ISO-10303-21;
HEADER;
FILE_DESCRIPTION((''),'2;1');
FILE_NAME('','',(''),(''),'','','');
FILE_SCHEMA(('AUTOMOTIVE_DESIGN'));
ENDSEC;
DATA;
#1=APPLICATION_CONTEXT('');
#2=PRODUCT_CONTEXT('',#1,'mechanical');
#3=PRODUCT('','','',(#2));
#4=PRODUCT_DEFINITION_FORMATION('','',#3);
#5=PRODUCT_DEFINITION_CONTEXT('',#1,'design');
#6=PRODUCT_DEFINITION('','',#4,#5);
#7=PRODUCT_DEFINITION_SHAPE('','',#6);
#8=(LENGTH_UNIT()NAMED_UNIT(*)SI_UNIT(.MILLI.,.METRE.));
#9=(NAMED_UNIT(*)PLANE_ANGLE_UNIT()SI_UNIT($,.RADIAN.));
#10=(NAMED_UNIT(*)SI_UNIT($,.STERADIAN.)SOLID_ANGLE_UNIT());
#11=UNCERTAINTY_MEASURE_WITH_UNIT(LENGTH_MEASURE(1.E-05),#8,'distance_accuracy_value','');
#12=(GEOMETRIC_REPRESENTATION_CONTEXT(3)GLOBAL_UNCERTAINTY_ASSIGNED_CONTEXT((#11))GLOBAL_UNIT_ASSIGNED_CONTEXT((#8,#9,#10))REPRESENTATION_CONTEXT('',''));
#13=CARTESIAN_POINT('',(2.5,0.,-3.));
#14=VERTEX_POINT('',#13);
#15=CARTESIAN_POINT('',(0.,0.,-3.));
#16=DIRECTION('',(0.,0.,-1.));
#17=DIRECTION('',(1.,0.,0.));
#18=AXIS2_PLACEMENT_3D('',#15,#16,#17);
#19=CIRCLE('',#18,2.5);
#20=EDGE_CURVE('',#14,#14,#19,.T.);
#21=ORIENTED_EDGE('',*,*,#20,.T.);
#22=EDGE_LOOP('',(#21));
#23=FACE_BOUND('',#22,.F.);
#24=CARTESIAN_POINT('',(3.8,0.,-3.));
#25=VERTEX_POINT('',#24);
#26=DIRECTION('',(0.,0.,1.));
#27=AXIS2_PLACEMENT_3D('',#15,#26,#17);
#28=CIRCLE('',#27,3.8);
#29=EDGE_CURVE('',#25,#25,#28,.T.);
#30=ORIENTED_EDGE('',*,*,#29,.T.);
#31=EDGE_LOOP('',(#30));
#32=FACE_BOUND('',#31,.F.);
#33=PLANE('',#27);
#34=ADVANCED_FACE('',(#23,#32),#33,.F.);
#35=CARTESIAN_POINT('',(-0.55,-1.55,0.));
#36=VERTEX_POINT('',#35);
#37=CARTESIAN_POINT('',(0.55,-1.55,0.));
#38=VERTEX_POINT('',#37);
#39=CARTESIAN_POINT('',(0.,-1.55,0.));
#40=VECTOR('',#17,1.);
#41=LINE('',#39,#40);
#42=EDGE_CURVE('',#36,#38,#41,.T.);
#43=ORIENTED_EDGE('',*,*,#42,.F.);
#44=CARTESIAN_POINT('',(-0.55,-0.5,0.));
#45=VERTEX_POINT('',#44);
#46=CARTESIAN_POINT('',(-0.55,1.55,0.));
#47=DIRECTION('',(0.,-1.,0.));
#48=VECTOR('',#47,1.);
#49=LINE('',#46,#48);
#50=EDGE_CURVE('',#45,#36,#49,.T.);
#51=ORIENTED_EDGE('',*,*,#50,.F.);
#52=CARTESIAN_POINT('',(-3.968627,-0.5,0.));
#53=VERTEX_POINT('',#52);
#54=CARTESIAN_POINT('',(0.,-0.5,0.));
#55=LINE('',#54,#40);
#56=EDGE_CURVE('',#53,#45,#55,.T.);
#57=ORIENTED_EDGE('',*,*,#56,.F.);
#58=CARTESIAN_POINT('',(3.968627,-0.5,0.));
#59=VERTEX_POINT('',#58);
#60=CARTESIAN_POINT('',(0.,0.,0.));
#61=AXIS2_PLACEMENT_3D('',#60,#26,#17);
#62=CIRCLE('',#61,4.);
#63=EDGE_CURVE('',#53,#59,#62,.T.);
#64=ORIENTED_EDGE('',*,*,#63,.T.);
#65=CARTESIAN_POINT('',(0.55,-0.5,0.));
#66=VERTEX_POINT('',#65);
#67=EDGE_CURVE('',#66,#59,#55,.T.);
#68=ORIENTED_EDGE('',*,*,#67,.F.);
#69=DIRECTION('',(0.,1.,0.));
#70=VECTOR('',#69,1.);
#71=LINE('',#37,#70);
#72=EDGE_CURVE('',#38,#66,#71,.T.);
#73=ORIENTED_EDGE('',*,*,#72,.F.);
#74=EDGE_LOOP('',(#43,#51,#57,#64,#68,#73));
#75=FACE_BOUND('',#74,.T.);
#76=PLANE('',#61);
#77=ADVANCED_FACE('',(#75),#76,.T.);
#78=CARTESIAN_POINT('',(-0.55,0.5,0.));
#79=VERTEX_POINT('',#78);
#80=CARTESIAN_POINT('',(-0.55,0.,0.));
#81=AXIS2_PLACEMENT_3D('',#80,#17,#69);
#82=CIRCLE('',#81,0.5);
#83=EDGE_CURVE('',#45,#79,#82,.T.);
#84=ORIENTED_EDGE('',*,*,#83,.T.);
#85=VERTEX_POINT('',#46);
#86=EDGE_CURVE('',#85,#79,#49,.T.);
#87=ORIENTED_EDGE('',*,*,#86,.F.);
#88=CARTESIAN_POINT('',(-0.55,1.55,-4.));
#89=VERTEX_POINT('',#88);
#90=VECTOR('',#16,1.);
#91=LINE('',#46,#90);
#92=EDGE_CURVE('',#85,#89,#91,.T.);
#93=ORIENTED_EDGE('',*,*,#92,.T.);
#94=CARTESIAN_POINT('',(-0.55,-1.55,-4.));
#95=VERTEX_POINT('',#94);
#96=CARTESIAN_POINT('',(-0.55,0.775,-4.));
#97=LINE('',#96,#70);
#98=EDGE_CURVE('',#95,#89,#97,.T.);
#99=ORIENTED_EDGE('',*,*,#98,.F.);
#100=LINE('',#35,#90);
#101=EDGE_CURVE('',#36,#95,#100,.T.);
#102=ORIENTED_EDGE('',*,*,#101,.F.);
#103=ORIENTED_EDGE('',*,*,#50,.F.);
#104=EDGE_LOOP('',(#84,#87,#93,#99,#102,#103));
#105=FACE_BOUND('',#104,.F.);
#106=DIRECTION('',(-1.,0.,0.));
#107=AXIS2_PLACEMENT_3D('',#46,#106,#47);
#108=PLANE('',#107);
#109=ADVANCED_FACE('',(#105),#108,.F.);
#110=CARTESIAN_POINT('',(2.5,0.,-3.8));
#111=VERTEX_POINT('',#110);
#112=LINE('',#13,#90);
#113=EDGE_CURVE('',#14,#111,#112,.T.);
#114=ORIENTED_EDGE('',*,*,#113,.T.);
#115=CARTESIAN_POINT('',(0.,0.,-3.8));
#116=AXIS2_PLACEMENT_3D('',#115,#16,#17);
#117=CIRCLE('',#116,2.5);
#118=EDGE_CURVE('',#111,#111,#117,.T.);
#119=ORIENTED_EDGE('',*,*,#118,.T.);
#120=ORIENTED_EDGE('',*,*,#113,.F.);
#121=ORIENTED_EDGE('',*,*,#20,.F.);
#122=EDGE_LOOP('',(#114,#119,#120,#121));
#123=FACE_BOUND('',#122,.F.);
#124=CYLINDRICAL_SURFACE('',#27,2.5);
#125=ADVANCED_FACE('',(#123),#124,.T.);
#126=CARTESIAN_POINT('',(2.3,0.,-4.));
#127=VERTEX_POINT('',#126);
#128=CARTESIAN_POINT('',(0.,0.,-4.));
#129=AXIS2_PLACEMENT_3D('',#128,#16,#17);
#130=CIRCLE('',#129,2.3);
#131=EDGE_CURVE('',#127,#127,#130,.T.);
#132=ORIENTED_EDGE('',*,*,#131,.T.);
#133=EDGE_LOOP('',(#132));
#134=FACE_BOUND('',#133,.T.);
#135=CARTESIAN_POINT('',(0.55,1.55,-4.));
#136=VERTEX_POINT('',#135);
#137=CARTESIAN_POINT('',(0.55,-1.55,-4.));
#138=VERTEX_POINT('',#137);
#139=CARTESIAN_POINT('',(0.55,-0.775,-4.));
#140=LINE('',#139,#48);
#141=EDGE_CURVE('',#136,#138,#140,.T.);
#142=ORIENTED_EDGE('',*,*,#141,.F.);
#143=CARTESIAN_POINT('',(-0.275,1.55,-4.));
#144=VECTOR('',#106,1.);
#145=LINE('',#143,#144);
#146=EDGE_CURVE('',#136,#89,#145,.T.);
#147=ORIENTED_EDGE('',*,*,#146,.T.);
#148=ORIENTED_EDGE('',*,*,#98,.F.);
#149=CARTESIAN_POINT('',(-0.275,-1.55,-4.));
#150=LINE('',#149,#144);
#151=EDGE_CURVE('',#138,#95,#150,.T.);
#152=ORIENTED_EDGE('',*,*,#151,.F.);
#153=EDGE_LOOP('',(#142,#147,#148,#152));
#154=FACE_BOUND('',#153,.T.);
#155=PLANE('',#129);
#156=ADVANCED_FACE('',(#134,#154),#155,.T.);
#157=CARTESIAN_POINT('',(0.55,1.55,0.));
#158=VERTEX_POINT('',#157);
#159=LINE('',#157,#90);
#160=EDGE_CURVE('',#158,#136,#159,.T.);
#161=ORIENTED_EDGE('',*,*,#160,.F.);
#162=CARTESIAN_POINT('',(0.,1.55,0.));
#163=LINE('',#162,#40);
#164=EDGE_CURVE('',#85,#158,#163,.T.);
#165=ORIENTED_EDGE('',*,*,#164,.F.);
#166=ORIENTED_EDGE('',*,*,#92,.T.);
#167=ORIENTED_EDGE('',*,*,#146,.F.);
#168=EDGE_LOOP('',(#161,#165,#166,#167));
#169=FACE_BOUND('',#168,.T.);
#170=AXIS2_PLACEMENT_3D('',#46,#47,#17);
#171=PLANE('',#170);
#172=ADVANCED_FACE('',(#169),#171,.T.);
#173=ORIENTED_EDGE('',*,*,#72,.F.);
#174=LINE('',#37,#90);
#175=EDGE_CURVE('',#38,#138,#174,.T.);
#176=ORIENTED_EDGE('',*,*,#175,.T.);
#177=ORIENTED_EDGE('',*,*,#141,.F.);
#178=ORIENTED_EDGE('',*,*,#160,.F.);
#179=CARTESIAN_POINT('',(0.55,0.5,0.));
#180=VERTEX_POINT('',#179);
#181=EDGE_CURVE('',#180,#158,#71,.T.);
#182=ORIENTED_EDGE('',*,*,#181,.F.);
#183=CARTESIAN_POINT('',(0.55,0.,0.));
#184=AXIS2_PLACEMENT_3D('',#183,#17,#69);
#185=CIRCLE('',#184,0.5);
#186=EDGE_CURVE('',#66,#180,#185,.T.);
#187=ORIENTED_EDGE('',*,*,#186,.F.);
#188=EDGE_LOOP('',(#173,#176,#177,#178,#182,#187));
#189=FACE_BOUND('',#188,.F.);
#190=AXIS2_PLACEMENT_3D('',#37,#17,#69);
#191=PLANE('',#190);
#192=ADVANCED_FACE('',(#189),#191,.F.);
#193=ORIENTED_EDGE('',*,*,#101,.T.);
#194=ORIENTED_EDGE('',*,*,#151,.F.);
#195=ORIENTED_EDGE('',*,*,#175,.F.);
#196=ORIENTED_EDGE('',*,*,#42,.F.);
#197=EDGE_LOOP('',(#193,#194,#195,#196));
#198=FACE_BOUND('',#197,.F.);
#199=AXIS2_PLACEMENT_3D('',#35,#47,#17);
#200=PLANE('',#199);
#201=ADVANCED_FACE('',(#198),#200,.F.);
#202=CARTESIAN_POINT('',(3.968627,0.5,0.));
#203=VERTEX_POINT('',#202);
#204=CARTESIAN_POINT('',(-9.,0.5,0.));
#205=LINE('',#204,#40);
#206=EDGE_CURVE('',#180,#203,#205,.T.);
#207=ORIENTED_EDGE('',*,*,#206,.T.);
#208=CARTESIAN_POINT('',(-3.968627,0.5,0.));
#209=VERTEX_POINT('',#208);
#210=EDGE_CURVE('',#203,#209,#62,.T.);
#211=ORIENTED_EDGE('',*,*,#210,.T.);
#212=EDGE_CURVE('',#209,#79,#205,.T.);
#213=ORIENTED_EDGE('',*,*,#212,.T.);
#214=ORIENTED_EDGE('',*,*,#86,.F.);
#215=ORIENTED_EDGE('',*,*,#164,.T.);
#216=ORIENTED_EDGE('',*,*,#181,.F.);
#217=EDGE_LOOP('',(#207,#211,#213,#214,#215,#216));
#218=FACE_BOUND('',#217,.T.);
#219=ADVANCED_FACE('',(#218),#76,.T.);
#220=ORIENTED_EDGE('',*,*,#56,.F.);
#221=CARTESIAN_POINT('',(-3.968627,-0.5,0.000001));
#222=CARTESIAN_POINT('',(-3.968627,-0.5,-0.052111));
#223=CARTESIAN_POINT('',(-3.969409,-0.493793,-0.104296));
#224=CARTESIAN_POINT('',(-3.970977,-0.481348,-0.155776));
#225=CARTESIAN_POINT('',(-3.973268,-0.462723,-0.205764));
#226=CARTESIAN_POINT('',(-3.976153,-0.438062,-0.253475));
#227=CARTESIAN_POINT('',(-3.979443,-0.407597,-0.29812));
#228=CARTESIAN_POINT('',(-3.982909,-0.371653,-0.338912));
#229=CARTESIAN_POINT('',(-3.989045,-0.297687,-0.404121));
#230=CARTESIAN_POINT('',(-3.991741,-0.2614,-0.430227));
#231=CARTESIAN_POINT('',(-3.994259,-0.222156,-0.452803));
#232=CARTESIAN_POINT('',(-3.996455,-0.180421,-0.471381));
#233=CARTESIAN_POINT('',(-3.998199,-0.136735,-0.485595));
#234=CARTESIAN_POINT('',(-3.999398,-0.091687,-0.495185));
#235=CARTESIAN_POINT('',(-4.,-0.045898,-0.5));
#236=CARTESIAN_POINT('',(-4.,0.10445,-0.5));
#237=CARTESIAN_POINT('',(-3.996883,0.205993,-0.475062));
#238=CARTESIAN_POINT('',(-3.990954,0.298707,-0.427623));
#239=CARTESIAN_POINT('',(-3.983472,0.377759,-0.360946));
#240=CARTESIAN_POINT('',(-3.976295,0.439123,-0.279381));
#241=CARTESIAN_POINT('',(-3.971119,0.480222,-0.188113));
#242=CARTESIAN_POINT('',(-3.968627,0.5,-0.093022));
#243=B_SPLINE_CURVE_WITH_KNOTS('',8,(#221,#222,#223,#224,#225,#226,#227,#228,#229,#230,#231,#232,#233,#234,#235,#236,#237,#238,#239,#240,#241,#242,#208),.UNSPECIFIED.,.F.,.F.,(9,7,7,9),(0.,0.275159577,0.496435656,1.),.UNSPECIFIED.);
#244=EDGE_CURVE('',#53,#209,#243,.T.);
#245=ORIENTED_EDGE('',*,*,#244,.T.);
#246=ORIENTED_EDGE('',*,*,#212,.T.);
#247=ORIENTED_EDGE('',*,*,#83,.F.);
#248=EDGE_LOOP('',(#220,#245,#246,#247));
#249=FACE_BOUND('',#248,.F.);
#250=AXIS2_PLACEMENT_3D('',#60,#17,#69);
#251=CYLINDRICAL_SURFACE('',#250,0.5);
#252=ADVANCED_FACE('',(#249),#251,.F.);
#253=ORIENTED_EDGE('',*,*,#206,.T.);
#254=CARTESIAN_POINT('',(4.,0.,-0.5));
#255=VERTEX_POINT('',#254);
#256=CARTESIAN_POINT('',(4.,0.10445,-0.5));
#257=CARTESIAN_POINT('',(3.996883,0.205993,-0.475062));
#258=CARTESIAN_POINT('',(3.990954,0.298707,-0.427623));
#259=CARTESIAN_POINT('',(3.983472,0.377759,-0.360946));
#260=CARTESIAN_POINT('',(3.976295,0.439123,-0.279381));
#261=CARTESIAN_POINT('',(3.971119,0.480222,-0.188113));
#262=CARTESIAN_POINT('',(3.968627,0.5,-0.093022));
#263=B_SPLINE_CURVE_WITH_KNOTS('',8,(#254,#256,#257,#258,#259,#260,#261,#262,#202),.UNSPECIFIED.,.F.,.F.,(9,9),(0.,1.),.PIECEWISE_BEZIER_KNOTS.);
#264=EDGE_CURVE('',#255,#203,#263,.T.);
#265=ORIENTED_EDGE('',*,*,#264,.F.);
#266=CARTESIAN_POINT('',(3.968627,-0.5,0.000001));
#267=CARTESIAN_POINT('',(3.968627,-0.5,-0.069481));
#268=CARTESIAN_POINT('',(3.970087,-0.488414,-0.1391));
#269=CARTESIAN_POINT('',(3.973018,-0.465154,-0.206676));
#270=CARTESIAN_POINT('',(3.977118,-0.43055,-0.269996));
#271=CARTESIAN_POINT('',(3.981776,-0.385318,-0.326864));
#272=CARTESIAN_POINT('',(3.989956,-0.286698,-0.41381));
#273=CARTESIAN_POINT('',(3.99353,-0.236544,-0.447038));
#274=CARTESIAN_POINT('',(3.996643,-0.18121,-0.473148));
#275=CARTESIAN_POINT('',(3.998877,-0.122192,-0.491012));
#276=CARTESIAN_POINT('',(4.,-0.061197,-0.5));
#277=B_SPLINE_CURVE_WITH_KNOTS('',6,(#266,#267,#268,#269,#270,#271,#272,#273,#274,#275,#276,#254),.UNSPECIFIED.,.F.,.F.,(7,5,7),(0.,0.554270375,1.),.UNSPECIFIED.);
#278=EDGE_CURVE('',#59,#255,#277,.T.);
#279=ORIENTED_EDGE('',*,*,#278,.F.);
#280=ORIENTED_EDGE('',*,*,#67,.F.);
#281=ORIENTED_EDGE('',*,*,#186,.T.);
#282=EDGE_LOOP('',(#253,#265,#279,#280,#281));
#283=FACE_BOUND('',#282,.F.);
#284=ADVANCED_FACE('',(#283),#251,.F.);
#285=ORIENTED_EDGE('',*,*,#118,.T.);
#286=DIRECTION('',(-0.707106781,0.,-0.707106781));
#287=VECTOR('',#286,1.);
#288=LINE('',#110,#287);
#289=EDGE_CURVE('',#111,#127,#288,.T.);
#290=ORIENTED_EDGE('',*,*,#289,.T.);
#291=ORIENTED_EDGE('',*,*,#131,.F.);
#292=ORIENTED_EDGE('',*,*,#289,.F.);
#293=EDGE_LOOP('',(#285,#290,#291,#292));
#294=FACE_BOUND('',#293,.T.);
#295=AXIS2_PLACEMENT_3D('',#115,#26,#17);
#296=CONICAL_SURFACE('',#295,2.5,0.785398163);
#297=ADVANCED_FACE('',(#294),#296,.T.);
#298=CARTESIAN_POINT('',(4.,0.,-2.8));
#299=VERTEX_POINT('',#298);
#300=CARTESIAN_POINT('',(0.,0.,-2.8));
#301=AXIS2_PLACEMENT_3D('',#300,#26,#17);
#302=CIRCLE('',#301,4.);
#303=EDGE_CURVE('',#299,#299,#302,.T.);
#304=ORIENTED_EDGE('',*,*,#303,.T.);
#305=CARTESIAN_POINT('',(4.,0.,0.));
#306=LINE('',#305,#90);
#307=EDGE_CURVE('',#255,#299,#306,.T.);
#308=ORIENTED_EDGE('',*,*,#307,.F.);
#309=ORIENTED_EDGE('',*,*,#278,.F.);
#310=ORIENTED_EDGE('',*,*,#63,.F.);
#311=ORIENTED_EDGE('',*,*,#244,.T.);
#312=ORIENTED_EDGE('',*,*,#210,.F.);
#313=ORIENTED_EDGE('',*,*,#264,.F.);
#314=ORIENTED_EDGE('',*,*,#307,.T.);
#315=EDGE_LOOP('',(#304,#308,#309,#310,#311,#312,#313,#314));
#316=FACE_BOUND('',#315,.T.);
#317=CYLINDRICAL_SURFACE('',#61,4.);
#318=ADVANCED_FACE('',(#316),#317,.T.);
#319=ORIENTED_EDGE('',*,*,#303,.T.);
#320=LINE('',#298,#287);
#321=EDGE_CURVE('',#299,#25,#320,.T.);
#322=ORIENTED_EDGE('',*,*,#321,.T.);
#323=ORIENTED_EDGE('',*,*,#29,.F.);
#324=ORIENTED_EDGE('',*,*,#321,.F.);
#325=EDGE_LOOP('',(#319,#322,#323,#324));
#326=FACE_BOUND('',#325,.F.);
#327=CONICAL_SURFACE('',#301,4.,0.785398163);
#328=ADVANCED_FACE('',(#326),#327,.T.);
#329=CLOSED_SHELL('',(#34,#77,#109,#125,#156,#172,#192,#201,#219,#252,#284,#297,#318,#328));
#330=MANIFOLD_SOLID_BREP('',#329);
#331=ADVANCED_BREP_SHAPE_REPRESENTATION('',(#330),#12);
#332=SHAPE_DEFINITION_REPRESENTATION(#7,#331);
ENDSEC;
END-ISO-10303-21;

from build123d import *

# Parameters (mm, degrees)
F0_R     = 4
F1_DEPTH = 3
F2_R     = 2.5
F3_DEPTH = 1
F4_R     = 0.5
F5_DEPTH = 9
F6_W     = 1.1
F6_H     = 1.05
F6_H_2   = 1
F7_DEPTH = 4.001
F8_SIZE  = 0.2


# Not quite as in the source:
# - a feature names something its author has since deleted; it is built from what else it names


with BuildPart() as f1:
    # F0 (on Top) → F1 (new body)
    with BuildSketch(Plane.XY):
        Circle(F0_R)
    extrude(amount=-F1_DEPTH)

    # F2 (on face) → F3 (join)
    with BuildSketch(Plane(origin=(0, 0, -3), x_dir=(1, 0, 0), z_dir=(0, 0, -1))):
        Circle(F2_R)
    extrude(amount=F3_DEPTH)

    # F4 (on Right) → F5 (cut, symmetric)
    with BuildSketch(Plane.YZ):
        Circle(F4_R)
    extrude(amount=F5_DEPTH, both=True, mode=Mode.SUBTRACT)

    # F6 (on face) → F7 (cut, through all)
    with BuildSketch(Plane.XY):
        with Locations((0, -1.025)):
            Rectangle(F6_W, F6_H)
        Rectangle(F6_W, F6_H_2)
        with Locations((0, 1.025)):
            Rectangle(F6_W, F6_H)
    extrude(amount=-F7_DEPTH, mode=Mode.SUBTRACT)

    # F8
    f8_edges = [f1.edges().sort_by_distance(p)[0] for p in [
        (-4, 0, -3),
        (-2.5, 0, -4),
    ]]
    chamfer(f8_edges, length=F8_SIZE)


solid = f1.part
